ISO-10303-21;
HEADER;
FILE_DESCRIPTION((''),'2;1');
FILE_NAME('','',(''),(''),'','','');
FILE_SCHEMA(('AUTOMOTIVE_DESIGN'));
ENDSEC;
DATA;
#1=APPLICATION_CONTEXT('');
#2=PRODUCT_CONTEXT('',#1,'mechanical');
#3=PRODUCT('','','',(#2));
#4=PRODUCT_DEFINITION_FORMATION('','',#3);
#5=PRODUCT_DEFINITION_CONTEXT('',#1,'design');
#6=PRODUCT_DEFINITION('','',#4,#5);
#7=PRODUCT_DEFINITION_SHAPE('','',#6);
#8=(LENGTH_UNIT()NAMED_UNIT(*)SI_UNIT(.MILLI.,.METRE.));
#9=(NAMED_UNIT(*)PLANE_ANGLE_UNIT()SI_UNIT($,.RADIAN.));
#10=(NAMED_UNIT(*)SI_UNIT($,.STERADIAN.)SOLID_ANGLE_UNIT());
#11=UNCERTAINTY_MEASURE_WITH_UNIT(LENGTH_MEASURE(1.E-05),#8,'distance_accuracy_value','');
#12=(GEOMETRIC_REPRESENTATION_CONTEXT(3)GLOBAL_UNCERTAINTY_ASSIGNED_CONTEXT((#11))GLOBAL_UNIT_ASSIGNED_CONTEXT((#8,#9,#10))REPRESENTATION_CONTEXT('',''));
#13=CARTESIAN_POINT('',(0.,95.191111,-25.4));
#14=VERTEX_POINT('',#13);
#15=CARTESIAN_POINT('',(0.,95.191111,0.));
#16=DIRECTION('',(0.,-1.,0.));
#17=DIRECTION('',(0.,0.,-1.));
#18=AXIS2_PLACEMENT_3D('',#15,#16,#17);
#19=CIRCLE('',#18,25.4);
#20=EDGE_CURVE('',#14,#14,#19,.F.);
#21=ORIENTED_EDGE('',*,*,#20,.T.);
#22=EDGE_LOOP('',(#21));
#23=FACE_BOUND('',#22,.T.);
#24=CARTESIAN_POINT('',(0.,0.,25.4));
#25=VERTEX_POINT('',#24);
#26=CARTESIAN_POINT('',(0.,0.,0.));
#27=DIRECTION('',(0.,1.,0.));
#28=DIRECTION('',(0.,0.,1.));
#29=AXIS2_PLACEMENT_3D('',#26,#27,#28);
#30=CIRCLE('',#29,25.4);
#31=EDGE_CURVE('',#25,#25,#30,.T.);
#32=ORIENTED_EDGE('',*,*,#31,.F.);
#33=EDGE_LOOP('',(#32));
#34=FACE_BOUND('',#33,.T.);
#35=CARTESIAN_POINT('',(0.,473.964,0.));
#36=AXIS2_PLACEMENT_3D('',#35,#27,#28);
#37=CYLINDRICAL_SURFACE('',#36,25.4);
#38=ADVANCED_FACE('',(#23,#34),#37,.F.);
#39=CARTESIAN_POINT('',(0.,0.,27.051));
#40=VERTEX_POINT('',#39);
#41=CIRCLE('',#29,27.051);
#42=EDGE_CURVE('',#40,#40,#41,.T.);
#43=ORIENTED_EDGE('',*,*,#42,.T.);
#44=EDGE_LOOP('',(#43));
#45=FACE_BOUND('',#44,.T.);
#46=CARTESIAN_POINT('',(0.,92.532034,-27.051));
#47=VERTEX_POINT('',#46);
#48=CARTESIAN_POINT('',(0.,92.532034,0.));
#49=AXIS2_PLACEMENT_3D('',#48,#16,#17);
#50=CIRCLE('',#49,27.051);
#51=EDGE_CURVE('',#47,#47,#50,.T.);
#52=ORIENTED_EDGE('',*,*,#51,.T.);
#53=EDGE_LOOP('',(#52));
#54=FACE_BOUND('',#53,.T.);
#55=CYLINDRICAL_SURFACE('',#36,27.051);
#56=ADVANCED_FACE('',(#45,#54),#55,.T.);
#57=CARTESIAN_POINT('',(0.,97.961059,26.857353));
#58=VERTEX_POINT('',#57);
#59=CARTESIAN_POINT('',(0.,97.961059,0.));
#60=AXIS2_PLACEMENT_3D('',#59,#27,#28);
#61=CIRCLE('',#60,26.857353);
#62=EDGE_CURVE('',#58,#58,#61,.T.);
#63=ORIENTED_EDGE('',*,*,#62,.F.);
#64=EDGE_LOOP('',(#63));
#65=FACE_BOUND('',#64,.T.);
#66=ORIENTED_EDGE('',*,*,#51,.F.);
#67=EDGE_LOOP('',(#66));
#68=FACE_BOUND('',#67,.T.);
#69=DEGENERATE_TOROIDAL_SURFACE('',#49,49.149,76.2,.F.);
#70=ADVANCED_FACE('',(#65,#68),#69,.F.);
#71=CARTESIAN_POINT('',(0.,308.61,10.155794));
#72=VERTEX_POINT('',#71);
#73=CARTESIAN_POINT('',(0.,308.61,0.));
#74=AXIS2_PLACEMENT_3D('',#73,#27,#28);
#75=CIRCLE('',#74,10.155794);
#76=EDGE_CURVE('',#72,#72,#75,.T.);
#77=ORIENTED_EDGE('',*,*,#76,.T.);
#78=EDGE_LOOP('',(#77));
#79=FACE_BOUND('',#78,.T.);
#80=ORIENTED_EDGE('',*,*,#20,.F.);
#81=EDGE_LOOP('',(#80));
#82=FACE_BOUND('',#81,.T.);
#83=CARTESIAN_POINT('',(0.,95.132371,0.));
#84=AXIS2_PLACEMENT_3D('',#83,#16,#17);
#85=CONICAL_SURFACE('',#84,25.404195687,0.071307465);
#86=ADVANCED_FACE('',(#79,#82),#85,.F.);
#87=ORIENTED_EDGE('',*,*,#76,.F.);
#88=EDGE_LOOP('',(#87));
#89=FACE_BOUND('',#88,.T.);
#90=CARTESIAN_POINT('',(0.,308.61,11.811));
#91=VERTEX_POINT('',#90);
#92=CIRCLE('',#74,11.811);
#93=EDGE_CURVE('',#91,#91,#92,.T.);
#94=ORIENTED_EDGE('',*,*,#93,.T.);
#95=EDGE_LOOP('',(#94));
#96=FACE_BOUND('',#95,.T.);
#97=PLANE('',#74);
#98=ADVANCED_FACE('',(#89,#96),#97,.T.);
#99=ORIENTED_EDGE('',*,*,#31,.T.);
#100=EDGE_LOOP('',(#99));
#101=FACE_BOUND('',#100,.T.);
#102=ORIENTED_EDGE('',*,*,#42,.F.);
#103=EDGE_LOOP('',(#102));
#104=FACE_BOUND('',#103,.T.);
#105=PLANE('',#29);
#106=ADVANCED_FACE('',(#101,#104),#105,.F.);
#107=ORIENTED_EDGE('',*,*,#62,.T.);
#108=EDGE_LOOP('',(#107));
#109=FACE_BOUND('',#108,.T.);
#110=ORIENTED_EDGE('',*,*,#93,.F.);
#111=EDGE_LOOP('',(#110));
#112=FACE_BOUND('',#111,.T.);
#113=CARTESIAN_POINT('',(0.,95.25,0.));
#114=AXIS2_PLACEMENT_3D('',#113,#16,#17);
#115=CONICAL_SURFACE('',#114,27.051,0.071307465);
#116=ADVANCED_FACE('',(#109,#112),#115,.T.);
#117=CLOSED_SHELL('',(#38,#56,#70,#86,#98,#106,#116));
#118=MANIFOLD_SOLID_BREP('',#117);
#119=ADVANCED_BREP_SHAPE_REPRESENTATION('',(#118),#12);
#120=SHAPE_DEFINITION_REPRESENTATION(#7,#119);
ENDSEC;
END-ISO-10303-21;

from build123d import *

# Parameters (mm, degrees)
FILLET1_R = 76.2


# Read off the part's stored shape, not the designer's step: Shell1
with BuildPart() as part:
    # Sketch1 → Revolve1 (revolve)
    with BuildSketch(Plane.XY, mode=Mode.PRIVATE) as revolve1_sk:
        Polygon((0, 308.61), (0, 0), (27.051, 0), (27.051, 95.25), (11.811, 308.61), align=None)
    revolve(revolve1_sk.sketch.rotate(Axis((0, 473.964, 0), (0, -1, 0)), 90), axis=Axis((0, 473.964, 0), (0, -1, 0)))

    # Shell1 outline → Shell1 (revolve, cut)
    with BuildSketch(Plane.XY):
        Polygon((25.4, 0), (25.4, 95.191110733), (10.155793624, 308.61), (0, 308.61), (0, 0), align=None)
    revolve(axis=Axis((0, 0, 0), (0, 1, 0)), mode=Mode.SUBTRACT)

    # Fillet1
    # the kernel refuses this fillet: 76.2 mm, written as the material it takes off along each edge
    with BuildSketch(Plane(origin=(0, 95.25, 0), x_dir=(0, 0, 1), z_dir=(1, 0, 0))) as fillet1_piece_1:
        with BuildLine():
            CenterArc((27.051 - FILLET1_R, FILLET1_R * 0.0356688476182), FILLET1_R, 355.91438322, 4.08561678)
            Line((27.051 - FILLET1_R * 0.00254130016926, -FILLET1_R * 0.0355782023697), (27.051 + FILLET1_R * 0.0174078738273, -FILLET1_R * 0.0370031433695))
            Line((27.051 + FILLET1_R * 0.0174078738273, -FILLET1_R * 0.0370031433695), (27.051 + FILLET1_R * 0.02, -FILLET1_R * 0.000713376952364))
            Line((27.051 + FILLET1_R * 0.02, -FILLET1_R * 0.000713376952364), (27.051 + FILLET1_R * 0.02, FILLET1_R * 0.0356688476182))
            Line((27.051 + FILLET1_R * 0.02, FILLET1_R * 0.0356688476182), (27.051, FILLET1_R * 0.0356688476182))
        make_face()
    revolve(axis=Axis((0, 95.25, 0), (0, -1, 0)), mode=Mode.SUBTRACT)


solid = part.part
